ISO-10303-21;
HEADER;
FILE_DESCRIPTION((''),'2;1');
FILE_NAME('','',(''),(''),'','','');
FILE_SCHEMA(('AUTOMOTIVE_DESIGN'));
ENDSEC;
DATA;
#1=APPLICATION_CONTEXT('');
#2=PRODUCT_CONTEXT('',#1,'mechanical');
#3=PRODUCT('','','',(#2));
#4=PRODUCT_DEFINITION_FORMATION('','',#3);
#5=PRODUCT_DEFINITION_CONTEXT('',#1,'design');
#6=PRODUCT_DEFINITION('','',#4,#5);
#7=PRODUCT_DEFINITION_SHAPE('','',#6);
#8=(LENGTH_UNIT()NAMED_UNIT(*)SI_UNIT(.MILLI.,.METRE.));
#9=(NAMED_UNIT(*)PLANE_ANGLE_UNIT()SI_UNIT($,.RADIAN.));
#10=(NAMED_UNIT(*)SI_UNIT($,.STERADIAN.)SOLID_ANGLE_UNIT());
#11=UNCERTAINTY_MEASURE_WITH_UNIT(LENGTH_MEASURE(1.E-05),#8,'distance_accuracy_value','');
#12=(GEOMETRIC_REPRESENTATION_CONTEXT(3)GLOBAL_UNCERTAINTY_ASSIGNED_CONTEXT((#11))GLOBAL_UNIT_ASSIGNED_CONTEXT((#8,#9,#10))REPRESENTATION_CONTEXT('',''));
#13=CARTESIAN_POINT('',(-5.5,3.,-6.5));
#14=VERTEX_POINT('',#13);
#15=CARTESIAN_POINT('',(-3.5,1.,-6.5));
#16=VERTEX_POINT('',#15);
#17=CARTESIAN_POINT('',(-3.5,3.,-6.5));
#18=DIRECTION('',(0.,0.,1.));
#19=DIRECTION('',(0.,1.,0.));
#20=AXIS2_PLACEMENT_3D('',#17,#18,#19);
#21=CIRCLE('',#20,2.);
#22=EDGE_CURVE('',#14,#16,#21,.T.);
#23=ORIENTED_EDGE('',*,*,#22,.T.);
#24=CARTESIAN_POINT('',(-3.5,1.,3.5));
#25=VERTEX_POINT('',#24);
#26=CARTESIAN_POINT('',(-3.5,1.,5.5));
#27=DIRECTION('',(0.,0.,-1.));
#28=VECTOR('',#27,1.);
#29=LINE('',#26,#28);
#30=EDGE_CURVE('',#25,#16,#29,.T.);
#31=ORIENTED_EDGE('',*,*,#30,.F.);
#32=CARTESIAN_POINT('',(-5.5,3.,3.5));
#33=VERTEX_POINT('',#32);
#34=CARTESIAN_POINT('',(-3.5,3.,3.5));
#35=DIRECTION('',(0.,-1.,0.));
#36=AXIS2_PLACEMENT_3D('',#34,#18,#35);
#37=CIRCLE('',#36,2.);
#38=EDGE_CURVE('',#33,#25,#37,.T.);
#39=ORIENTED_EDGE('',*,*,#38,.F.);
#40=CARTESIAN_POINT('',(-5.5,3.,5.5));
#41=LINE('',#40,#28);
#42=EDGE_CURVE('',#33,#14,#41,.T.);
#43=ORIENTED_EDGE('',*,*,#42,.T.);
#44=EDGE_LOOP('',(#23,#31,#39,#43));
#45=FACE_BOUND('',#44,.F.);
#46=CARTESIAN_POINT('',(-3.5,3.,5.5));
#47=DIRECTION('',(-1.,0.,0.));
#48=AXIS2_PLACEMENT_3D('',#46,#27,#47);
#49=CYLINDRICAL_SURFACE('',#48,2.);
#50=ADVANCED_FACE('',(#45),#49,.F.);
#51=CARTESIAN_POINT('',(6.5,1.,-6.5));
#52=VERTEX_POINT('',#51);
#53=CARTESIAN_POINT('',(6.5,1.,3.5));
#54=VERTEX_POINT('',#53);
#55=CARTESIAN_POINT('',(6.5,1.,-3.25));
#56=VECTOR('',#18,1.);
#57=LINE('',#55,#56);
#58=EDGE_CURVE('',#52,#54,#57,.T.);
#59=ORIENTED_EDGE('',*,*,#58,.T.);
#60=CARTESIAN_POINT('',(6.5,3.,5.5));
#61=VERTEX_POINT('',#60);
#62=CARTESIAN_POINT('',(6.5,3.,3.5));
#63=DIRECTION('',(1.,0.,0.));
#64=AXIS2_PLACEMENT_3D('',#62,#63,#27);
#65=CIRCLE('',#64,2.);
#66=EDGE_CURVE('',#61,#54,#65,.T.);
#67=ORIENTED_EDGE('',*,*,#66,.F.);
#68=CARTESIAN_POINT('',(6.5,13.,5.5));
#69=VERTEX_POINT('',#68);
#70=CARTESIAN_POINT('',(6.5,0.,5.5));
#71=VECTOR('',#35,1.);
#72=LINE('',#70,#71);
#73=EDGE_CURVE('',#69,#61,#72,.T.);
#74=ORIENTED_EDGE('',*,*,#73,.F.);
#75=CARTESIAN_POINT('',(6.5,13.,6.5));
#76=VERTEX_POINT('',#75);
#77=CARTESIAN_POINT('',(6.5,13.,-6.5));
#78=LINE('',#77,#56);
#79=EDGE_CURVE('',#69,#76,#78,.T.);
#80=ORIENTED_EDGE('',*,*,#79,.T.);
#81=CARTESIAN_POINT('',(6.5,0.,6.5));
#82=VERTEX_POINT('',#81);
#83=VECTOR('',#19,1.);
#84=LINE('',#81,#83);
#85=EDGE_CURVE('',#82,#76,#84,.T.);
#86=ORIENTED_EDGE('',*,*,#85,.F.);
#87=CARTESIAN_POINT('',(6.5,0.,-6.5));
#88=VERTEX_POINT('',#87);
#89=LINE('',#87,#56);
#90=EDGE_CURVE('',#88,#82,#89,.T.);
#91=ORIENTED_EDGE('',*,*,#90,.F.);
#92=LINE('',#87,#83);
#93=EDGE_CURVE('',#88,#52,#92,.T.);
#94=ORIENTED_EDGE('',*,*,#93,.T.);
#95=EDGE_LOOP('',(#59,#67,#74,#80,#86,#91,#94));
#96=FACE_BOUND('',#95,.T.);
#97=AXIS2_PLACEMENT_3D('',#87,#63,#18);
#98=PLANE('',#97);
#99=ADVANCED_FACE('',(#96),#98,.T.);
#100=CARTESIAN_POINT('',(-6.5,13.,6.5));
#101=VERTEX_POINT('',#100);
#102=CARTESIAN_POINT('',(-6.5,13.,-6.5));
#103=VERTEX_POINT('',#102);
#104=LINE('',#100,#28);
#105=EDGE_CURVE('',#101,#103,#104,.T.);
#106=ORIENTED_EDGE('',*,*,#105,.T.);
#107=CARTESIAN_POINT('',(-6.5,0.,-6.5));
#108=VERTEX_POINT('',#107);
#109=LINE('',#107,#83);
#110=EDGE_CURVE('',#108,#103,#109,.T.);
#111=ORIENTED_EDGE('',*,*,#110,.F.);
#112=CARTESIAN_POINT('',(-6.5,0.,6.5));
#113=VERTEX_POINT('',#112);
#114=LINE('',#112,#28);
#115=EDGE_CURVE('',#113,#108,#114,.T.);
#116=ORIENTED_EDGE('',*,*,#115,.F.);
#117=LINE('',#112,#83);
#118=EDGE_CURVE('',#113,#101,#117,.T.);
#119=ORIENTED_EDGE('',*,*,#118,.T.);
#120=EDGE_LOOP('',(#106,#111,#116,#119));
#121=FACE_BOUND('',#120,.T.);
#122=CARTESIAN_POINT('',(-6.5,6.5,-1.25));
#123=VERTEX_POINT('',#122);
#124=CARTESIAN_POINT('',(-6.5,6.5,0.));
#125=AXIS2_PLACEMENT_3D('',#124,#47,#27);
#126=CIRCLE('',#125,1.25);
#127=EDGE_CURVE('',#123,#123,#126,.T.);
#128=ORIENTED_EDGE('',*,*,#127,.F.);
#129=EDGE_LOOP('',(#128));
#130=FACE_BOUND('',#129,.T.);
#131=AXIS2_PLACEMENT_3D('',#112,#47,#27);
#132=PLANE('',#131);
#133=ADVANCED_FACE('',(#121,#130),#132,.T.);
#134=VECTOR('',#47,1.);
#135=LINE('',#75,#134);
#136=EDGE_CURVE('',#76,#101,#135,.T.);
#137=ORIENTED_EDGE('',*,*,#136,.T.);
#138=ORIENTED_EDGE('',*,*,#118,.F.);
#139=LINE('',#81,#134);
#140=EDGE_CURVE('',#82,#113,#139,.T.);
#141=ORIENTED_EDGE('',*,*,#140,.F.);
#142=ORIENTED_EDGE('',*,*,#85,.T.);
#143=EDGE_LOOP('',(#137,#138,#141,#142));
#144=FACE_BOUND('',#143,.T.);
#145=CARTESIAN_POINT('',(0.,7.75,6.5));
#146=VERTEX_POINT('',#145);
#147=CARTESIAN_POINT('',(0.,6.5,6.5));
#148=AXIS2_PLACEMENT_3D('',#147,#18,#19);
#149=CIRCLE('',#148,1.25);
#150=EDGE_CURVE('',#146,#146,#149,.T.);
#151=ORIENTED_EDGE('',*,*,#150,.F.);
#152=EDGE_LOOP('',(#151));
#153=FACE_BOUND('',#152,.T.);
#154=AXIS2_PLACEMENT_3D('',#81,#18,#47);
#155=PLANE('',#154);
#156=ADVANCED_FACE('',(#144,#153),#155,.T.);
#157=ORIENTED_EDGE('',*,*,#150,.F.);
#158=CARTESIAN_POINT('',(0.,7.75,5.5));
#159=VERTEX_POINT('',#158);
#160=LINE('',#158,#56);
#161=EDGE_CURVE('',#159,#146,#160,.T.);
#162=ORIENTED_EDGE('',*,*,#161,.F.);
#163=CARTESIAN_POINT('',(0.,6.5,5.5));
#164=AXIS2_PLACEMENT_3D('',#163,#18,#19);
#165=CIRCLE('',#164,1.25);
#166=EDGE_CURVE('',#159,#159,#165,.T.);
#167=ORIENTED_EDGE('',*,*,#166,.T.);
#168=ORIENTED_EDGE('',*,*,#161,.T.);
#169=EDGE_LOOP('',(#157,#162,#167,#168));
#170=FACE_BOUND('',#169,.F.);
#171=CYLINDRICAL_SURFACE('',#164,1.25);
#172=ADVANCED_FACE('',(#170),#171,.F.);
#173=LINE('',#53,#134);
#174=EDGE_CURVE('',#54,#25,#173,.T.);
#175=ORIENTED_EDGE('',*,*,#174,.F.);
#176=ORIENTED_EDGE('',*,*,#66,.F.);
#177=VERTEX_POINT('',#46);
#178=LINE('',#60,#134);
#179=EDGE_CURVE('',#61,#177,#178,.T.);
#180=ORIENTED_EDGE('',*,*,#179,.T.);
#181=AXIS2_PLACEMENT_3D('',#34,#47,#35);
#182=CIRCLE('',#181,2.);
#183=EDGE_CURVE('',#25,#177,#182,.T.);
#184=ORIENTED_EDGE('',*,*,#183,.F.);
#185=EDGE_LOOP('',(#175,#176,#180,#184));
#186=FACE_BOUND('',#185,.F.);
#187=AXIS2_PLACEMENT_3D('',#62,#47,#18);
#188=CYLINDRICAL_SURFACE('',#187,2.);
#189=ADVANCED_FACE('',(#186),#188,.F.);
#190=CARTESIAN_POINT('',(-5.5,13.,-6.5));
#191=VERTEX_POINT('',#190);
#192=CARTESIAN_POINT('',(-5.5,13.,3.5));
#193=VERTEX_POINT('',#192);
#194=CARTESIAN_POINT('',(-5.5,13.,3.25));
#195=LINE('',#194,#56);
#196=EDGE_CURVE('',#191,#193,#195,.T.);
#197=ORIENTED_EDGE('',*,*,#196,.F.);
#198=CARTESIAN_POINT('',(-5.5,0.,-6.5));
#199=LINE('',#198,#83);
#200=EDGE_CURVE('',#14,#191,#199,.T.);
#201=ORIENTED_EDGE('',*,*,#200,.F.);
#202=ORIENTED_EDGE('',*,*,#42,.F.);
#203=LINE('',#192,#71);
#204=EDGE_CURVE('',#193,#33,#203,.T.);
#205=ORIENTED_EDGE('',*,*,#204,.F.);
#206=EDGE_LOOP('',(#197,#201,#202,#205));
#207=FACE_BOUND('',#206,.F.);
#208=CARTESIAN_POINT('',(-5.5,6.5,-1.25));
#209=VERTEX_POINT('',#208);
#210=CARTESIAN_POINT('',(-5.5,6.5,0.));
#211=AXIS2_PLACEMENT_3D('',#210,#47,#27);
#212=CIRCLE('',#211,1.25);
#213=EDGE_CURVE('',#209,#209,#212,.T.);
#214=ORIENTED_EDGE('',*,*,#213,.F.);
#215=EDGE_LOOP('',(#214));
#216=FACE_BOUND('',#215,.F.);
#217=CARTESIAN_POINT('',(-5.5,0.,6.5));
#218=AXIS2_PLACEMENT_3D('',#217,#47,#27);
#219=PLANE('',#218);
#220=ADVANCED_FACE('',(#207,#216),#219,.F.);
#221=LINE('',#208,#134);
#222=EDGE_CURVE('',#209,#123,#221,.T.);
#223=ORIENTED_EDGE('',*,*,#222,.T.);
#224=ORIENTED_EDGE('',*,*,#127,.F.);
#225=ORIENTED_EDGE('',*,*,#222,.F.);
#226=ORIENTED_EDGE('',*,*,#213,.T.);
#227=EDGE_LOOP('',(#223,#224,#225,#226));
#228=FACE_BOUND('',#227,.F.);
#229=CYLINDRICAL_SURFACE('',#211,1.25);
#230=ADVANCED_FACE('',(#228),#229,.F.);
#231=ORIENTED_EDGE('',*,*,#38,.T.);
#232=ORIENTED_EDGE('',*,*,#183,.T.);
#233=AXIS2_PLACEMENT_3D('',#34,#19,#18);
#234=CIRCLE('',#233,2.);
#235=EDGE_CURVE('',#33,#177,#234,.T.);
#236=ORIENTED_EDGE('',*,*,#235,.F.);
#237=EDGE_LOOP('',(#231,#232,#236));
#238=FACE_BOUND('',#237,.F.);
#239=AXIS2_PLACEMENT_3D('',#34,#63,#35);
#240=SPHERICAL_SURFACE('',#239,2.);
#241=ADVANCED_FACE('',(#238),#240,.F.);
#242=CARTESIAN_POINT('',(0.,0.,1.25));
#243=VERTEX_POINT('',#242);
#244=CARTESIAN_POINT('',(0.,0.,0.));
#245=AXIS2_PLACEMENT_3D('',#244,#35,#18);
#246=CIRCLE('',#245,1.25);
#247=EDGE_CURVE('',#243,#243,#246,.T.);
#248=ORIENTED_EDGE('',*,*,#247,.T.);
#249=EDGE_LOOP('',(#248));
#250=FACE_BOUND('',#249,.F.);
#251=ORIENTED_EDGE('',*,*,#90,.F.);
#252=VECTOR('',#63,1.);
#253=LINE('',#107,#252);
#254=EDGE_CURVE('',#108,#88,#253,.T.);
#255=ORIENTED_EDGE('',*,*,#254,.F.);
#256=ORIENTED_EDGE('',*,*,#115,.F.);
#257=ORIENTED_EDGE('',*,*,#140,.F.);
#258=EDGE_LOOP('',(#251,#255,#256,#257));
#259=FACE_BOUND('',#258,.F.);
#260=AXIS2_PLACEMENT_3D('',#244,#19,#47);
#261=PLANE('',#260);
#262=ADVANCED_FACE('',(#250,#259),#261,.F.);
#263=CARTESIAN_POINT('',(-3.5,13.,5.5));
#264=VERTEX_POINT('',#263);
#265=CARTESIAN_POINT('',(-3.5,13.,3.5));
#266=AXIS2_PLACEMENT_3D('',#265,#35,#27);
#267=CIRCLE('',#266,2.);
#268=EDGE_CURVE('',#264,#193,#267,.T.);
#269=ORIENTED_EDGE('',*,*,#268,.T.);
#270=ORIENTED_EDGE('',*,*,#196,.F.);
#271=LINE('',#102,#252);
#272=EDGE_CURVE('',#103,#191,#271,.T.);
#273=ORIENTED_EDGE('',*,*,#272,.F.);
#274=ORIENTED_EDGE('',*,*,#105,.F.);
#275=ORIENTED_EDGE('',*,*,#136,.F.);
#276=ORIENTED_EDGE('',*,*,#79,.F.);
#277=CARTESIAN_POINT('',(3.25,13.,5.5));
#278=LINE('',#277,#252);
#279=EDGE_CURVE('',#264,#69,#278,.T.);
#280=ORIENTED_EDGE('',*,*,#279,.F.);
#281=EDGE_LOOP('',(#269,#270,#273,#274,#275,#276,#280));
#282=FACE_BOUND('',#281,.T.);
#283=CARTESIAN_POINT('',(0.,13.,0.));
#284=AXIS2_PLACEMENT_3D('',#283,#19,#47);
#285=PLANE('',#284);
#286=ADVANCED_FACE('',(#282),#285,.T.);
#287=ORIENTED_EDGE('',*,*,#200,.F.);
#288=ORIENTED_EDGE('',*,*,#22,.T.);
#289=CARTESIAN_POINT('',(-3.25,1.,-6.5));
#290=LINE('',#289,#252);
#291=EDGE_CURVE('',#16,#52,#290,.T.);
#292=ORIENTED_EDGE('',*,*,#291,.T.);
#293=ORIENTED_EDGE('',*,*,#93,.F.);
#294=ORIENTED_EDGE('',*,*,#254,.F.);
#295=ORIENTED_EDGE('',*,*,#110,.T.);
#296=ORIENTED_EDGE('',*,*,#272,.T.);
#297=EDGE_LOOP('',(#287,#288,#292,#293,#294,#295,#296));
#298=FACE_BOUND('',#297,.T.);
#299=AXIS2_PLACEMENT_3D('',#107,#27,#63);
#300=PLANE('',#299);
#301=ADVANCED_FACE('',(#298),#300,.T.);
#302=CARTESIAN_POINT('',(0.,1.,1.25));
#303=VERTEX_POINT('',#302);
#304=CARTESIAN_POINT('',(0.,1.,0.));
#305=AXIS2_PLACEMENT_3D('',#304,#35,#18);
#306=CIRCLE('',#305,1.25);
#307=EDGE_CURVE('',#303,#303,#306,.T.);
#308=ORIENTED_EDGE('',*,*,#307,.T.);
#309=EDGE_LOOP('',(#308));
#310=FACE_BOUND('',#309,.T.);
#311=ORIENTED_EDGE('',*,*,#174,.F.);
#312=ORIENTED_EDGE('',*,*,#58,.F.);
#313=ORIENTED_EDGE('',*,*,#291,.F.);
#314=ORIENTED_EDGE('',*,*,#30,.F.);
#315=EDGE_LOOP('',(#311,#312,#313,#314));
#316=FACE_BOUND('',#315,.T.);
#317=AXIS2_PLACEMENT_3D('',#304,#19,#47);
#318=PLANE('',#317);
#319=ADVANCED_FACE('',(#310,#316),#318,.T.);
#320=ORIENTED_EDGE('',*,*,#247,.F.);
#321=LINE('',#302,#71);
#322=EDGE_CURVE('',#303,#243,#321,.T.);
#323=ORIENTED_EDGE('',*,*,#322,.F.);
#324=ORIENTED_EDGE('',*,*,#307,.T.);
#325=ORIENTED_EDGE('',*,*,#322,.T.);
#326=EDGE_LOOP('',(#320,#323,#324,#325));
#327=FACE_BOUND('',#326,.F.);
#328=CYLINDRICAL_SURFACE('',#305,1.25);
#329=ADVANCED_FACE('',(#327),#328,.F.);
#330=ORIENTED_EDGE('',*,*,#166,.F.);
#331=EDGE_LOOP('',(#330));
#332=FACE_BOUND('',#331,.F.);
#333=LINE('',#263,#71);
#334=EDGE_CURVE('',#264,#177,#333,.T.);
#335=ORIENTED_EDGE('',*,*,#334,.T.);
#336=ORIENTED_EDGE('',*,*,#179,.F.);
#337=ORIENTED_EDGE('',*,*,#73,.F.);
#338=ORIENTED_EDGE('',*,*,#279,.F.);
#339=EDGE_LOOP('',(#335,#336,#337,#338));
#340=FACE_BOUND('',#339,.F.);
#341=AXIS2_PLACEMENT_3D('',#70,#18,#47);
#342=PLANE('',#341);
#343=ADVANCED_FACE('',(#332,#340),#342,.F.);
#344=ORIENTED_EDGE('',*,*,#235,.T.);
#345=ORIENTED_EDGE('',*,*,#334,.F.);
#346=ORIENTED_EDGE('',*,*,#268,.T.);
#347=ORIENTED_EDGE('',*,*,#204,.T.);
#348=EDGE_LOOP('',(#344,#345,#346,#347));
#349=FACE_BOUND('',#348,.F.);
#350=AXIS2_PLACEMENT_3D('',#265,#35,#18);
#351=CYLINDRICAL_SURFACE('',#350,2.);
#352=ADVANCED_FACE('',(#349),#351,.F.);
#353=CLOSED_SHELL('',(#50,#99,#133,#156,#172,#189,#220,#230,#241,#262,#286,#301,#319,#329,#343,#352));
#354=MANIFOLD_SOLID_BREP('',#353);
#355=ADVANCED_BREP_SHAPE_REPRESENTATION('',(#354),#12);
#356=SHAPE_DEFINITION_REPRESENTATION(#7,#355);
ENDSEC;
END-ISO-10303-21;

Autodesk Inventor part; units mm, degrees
ref_plane "YZ Plane" through (0, 0, 0) normal (1, 0, 0) x (0, 1, 0)
ref_plane "XZ Plane" through (0, 0, 0) normal (0, 1, 0) x (-1, 0, 0)
ref_plane "XY Plane" through (0, 0, 0) normal (0, 0, 1) x (1, 0, 0)
sketch "Boceto1" plane through (0, 0, 0) normal (0, 1, 0) x (-1, 0, 0)
  line L0 (-6.5, 6.5) -> (6.5, 6.5)
  line L1 (6.5, 6.5) -> (6.5, -6.5)
  line L2 (6.5, -6.5) -> (-6.5, -6.5)
  line L3 (-6.5, -6.5) -> (-6.5, 6.5)
  line L4 (-6.5, 6.5) -> (6.5, -6.5) construction
  line L5 (6.5, 6.5) -> (-6.5, -6.5) construction
  point P0 (0, 0)
  dimension "d0" = 13
  dimension "d1" = 13
extrude "Extrusión1" add sketch "Boceto1" along normal blind 13
shell "Vaciado1" thickness 1 removed faces 3 at (2.1667, 13, 2.1667) at (2.1667, 4.3333, -6.5) at (6.5, 4.3333, 2.1667)
fillet "Empalme1" radius 2 3 edges at (0.5, 1, 5.5) (-5.5, 1, -0.5) (-5.5, 7, 5.5)
sketch "Boceto2" plane through (-3.5, 1, 3.5) normal (0, 1, 0) x (1, 0, 0)
  line L0 (0, 10) -> (10, 10) projected
  line L1 (10, 10) -> (10, 0) projected
  point P0 (3.5, 3.5)
  point P1 (3.5, 3.5)
  dimension "d6" = 6.5
  dimension "d7" = 6.5
hole "Agujero1" at (0, 1, 0) direction (0, -1, 0) diameter 2.5 depth 3 tip angle 118
sketch "Boceto3" plane through (6.5, 13, 5.5) normal (0, 0, -1) x (-1, 0, 0)
  line L0 (0, 0) -> (10, 0) projected
  line L1 (0, -10) -> (0, 0) projected
  point P0 (6.5, -13)
  point P1 (6.5, -6.5)
  dimension "d15" = 6.5
  dimension "d16" = 6.5
hole "Agujero2" at (0, 6.5, 5.5) direction (0, 0, 1) diameter 2.5 depth 3 tip angle 118
sketch "Boceto4" plane through (-5.5, 3, -6.5) normal (1, 0, 0) x (0, 0, -1)
  line L0 (0, 10) -> (0, 0) projected
  line L1 (-10, 10) -> (0, 10) projected
  point P0 (-6.5, -3)
  point P1 (-6.5, 3.5)
  dimension "d24" = 6.5
  dimension "d25" = 6.5
hole "Agujero3" at (-5.5, 6.5, 0) direction (-1, 0, 0) diameter 2.5 depth 3 tip angle 118
properties part number "Escuadra_triple"
